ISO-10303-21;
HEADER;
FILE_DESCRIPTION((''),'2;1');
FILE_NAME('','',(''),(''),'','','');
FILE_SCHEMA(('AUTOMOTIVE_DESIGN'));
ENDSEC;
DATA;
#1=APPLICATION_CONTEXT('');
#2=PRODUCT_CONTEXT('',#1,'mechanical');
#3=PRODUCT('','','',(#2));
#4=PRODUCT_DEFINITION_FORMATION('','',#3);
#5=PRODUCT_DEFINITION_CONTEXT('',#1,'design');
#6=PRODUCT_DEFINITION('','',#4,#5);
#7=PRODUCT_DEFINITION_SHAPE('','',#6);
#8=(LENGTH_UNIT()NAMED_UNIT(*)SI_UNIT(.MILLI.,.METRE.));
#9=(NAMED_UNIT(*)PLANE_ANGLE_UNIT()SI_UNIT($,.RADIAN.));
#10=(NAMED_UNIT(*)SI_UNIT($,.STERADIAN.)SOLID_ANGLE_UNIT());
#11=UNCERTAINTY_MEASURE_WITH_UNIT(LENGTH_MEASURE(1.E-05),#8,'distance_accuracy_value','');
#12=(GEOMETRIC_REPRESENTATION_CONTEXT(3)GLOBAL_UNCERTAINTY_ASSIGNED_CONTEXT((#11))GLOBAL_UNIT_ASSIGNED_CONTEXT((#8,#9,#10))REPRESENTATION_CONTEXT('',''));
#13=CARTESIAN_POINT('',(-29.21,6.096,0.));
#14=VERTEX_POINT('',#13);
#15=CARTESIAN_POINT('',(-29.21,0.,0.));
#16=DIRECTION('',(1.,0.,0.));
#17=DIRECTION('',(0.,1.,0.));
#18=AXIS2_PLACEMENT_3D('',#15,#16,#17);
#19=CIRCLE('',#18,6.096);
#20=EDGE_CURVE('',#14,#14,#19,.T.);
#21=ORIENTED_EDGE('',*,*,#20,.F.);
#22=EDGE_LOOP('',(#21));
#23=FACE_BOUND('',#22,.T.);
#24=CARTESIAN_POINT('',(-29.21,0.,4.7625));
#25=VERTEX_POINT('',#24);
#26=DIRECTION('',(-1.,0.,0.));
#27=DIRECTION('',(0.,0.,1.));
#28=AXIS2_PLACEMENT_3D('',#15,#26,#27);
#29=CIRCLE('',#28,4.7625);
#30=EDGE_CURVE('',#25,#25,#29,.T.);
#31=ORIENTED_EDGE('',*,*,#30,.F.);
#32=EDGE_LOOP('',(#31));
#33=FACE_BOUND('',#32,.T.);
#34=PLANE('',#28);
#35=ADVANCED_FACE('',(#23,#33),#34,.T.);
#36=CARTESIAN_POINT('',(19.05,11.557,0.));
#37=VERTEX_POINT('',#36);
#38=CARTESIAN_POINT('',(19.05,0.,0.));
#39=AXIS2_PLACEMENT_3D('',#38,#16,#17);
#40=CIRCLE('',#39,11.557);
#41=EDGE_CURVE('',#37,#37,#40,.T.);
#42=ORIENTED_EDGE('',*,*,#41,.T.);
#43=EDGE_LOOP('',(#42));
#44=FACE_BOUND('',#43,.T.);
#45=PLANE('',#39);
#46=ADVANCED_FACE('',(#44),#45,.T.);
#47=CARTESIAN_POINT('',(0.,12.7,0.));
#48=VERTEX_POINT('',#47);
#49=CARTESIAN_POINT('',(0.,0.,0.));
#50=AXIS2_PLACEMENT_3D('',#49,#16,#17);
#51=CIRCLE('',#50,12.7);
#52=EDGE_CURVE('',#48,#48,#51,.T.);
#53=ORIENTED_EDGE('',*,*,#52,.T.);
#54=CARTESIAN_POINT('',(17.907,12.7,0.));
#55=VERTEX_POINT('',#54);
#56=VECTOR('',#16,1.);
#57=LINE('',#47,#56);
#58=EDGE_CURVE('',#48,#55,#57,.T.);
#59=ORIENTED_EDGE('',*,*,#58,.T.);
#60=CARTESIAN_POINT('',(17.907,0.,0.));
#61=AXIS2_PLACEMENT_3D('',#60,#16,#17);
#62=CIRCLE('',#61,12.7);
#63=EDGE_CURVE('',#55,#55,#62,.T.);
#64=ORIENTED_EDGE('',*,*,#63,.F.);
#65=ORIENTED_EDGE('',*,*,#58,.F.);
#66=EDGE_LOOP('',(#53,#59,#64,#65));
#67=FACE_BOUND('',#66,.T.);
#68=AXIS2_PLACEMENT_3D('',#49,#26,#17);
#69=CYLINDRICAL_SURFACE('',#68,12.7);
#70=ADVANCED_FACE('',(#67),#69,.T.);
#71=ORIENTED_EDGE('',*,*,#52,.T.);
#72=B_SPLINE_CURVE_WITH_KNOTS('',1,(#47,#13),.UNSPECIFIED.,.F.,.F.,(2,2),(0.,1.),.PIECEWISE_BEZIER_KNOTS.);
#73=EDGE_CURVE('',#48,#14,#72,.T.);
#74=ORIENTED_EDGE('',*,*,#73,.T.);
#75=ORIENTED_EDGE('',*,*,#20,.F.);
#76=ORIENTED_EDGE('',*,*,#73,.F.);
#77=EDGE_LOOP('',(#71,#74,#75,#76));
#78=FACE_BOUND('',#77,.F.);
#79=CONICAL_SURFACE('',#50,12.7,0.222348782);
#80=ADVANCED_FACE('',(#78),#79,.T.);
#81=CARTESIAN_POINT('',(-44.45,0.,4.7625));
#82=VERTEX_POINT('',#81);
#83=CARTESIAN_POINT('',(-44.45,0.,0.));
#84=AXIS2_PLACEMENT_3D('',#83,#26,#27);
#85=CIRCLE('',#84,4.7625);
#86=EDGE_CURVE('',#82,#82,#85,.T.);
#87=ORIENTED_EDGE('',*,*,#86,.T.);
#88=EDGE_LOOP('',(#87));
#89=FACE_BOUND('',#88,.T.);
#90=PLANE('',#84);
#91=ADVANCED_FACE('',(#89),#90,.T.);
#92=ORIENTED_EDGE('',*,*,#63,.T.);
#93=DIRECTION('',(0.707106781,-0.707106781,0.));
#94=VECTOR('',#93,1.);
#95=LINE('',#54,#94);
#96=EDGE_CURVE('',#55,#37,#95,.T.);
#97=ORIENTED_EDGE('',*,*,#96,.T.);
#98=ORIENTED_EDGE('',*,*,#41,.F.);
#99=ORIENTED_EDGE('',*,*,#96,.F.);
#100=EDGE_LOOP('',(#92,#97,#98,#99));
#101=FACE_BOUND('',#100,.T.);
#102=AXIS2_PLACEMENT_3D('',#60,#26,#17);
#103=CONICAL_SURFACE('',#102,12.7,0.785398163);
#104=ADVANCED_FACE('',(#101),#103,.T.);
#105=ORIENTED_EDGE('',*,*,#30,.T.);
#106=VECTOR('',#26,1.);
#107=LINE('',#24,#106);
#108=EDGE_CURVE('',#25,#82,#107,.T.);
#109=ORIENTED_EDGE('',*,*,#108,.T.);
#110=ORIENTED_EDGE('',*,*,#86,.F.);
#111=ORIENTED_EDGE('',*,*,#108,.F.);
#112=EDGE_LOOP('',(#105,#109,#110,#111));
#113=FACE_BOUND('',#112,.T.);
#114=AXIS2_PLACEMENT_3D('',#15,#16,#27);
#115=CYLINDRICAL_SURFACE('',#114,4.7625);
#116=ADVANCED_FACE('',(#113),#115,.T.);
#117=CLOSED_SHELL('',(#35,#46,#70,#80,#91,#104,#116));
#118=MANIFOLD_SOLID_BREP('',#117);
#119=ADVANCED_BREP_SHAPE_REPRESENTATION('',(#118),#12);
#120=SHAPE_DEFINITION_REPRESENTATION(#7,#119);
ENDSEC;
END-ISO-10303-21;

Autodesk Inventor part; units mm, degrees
ref_plane "YZ Plane" through (0, 0, 0) normal (1, 0, 0) x (0, 1, 0)
ref_plane "XZ Plane" through (0, 0, 0) normal (0, 1, 0) x (-1, 0, 0)
ref_plane "XY Plane" through (0, 0, 0) normal (0, 0, 1) x (1, 0, 0)
sketch "Sketch1" plane through (0, 0, 0) normal (1, 0, 0) x (0, 1, 0)
  circle A0 centre (0, 0) radius 12.7
  dimension "d0" = 25.4
extrude "Extrusion1" add sketch "Sketch1" along normal blind 19.05
chamfer "Chamfer1" distance 1.143 angle 45 1 edges at (19.05, -12.7, 0)
sketch "Sketch2" plane through (0, 0, 0) normal (-1, 0, 0) x (0, 0, 1)
  circle A0 centre (0, 0) radius 12.7
ref_plane "Work Plane1" through (-29.21, 0, 0) normal (-1, 0, 0) x (0, 0, 1)
sketch "Sketch3" plane through (-29.21, 0, 0) normal (-1, 0, 0) x (0, 0, 1)
  circle A0 centre (0, 0) radius 6.096
  dimension "d7" = 12.192
loft "Loft1" add profiles "Sketch3" section 1 edges at (0, -12.7, 0)
sketch "Sketch4" plane through (-29.21, 0, 0) normal (-1, 0, 0) x (0, 0, 1)
  circle A0 centre (0, 0) radius 4.7625
  dimension "d12" = 9.525
extrude "Extrusion2" add sketch "Sketch4" along normal blind 15.24
properties part number "Kevin_CAD_test_2"
